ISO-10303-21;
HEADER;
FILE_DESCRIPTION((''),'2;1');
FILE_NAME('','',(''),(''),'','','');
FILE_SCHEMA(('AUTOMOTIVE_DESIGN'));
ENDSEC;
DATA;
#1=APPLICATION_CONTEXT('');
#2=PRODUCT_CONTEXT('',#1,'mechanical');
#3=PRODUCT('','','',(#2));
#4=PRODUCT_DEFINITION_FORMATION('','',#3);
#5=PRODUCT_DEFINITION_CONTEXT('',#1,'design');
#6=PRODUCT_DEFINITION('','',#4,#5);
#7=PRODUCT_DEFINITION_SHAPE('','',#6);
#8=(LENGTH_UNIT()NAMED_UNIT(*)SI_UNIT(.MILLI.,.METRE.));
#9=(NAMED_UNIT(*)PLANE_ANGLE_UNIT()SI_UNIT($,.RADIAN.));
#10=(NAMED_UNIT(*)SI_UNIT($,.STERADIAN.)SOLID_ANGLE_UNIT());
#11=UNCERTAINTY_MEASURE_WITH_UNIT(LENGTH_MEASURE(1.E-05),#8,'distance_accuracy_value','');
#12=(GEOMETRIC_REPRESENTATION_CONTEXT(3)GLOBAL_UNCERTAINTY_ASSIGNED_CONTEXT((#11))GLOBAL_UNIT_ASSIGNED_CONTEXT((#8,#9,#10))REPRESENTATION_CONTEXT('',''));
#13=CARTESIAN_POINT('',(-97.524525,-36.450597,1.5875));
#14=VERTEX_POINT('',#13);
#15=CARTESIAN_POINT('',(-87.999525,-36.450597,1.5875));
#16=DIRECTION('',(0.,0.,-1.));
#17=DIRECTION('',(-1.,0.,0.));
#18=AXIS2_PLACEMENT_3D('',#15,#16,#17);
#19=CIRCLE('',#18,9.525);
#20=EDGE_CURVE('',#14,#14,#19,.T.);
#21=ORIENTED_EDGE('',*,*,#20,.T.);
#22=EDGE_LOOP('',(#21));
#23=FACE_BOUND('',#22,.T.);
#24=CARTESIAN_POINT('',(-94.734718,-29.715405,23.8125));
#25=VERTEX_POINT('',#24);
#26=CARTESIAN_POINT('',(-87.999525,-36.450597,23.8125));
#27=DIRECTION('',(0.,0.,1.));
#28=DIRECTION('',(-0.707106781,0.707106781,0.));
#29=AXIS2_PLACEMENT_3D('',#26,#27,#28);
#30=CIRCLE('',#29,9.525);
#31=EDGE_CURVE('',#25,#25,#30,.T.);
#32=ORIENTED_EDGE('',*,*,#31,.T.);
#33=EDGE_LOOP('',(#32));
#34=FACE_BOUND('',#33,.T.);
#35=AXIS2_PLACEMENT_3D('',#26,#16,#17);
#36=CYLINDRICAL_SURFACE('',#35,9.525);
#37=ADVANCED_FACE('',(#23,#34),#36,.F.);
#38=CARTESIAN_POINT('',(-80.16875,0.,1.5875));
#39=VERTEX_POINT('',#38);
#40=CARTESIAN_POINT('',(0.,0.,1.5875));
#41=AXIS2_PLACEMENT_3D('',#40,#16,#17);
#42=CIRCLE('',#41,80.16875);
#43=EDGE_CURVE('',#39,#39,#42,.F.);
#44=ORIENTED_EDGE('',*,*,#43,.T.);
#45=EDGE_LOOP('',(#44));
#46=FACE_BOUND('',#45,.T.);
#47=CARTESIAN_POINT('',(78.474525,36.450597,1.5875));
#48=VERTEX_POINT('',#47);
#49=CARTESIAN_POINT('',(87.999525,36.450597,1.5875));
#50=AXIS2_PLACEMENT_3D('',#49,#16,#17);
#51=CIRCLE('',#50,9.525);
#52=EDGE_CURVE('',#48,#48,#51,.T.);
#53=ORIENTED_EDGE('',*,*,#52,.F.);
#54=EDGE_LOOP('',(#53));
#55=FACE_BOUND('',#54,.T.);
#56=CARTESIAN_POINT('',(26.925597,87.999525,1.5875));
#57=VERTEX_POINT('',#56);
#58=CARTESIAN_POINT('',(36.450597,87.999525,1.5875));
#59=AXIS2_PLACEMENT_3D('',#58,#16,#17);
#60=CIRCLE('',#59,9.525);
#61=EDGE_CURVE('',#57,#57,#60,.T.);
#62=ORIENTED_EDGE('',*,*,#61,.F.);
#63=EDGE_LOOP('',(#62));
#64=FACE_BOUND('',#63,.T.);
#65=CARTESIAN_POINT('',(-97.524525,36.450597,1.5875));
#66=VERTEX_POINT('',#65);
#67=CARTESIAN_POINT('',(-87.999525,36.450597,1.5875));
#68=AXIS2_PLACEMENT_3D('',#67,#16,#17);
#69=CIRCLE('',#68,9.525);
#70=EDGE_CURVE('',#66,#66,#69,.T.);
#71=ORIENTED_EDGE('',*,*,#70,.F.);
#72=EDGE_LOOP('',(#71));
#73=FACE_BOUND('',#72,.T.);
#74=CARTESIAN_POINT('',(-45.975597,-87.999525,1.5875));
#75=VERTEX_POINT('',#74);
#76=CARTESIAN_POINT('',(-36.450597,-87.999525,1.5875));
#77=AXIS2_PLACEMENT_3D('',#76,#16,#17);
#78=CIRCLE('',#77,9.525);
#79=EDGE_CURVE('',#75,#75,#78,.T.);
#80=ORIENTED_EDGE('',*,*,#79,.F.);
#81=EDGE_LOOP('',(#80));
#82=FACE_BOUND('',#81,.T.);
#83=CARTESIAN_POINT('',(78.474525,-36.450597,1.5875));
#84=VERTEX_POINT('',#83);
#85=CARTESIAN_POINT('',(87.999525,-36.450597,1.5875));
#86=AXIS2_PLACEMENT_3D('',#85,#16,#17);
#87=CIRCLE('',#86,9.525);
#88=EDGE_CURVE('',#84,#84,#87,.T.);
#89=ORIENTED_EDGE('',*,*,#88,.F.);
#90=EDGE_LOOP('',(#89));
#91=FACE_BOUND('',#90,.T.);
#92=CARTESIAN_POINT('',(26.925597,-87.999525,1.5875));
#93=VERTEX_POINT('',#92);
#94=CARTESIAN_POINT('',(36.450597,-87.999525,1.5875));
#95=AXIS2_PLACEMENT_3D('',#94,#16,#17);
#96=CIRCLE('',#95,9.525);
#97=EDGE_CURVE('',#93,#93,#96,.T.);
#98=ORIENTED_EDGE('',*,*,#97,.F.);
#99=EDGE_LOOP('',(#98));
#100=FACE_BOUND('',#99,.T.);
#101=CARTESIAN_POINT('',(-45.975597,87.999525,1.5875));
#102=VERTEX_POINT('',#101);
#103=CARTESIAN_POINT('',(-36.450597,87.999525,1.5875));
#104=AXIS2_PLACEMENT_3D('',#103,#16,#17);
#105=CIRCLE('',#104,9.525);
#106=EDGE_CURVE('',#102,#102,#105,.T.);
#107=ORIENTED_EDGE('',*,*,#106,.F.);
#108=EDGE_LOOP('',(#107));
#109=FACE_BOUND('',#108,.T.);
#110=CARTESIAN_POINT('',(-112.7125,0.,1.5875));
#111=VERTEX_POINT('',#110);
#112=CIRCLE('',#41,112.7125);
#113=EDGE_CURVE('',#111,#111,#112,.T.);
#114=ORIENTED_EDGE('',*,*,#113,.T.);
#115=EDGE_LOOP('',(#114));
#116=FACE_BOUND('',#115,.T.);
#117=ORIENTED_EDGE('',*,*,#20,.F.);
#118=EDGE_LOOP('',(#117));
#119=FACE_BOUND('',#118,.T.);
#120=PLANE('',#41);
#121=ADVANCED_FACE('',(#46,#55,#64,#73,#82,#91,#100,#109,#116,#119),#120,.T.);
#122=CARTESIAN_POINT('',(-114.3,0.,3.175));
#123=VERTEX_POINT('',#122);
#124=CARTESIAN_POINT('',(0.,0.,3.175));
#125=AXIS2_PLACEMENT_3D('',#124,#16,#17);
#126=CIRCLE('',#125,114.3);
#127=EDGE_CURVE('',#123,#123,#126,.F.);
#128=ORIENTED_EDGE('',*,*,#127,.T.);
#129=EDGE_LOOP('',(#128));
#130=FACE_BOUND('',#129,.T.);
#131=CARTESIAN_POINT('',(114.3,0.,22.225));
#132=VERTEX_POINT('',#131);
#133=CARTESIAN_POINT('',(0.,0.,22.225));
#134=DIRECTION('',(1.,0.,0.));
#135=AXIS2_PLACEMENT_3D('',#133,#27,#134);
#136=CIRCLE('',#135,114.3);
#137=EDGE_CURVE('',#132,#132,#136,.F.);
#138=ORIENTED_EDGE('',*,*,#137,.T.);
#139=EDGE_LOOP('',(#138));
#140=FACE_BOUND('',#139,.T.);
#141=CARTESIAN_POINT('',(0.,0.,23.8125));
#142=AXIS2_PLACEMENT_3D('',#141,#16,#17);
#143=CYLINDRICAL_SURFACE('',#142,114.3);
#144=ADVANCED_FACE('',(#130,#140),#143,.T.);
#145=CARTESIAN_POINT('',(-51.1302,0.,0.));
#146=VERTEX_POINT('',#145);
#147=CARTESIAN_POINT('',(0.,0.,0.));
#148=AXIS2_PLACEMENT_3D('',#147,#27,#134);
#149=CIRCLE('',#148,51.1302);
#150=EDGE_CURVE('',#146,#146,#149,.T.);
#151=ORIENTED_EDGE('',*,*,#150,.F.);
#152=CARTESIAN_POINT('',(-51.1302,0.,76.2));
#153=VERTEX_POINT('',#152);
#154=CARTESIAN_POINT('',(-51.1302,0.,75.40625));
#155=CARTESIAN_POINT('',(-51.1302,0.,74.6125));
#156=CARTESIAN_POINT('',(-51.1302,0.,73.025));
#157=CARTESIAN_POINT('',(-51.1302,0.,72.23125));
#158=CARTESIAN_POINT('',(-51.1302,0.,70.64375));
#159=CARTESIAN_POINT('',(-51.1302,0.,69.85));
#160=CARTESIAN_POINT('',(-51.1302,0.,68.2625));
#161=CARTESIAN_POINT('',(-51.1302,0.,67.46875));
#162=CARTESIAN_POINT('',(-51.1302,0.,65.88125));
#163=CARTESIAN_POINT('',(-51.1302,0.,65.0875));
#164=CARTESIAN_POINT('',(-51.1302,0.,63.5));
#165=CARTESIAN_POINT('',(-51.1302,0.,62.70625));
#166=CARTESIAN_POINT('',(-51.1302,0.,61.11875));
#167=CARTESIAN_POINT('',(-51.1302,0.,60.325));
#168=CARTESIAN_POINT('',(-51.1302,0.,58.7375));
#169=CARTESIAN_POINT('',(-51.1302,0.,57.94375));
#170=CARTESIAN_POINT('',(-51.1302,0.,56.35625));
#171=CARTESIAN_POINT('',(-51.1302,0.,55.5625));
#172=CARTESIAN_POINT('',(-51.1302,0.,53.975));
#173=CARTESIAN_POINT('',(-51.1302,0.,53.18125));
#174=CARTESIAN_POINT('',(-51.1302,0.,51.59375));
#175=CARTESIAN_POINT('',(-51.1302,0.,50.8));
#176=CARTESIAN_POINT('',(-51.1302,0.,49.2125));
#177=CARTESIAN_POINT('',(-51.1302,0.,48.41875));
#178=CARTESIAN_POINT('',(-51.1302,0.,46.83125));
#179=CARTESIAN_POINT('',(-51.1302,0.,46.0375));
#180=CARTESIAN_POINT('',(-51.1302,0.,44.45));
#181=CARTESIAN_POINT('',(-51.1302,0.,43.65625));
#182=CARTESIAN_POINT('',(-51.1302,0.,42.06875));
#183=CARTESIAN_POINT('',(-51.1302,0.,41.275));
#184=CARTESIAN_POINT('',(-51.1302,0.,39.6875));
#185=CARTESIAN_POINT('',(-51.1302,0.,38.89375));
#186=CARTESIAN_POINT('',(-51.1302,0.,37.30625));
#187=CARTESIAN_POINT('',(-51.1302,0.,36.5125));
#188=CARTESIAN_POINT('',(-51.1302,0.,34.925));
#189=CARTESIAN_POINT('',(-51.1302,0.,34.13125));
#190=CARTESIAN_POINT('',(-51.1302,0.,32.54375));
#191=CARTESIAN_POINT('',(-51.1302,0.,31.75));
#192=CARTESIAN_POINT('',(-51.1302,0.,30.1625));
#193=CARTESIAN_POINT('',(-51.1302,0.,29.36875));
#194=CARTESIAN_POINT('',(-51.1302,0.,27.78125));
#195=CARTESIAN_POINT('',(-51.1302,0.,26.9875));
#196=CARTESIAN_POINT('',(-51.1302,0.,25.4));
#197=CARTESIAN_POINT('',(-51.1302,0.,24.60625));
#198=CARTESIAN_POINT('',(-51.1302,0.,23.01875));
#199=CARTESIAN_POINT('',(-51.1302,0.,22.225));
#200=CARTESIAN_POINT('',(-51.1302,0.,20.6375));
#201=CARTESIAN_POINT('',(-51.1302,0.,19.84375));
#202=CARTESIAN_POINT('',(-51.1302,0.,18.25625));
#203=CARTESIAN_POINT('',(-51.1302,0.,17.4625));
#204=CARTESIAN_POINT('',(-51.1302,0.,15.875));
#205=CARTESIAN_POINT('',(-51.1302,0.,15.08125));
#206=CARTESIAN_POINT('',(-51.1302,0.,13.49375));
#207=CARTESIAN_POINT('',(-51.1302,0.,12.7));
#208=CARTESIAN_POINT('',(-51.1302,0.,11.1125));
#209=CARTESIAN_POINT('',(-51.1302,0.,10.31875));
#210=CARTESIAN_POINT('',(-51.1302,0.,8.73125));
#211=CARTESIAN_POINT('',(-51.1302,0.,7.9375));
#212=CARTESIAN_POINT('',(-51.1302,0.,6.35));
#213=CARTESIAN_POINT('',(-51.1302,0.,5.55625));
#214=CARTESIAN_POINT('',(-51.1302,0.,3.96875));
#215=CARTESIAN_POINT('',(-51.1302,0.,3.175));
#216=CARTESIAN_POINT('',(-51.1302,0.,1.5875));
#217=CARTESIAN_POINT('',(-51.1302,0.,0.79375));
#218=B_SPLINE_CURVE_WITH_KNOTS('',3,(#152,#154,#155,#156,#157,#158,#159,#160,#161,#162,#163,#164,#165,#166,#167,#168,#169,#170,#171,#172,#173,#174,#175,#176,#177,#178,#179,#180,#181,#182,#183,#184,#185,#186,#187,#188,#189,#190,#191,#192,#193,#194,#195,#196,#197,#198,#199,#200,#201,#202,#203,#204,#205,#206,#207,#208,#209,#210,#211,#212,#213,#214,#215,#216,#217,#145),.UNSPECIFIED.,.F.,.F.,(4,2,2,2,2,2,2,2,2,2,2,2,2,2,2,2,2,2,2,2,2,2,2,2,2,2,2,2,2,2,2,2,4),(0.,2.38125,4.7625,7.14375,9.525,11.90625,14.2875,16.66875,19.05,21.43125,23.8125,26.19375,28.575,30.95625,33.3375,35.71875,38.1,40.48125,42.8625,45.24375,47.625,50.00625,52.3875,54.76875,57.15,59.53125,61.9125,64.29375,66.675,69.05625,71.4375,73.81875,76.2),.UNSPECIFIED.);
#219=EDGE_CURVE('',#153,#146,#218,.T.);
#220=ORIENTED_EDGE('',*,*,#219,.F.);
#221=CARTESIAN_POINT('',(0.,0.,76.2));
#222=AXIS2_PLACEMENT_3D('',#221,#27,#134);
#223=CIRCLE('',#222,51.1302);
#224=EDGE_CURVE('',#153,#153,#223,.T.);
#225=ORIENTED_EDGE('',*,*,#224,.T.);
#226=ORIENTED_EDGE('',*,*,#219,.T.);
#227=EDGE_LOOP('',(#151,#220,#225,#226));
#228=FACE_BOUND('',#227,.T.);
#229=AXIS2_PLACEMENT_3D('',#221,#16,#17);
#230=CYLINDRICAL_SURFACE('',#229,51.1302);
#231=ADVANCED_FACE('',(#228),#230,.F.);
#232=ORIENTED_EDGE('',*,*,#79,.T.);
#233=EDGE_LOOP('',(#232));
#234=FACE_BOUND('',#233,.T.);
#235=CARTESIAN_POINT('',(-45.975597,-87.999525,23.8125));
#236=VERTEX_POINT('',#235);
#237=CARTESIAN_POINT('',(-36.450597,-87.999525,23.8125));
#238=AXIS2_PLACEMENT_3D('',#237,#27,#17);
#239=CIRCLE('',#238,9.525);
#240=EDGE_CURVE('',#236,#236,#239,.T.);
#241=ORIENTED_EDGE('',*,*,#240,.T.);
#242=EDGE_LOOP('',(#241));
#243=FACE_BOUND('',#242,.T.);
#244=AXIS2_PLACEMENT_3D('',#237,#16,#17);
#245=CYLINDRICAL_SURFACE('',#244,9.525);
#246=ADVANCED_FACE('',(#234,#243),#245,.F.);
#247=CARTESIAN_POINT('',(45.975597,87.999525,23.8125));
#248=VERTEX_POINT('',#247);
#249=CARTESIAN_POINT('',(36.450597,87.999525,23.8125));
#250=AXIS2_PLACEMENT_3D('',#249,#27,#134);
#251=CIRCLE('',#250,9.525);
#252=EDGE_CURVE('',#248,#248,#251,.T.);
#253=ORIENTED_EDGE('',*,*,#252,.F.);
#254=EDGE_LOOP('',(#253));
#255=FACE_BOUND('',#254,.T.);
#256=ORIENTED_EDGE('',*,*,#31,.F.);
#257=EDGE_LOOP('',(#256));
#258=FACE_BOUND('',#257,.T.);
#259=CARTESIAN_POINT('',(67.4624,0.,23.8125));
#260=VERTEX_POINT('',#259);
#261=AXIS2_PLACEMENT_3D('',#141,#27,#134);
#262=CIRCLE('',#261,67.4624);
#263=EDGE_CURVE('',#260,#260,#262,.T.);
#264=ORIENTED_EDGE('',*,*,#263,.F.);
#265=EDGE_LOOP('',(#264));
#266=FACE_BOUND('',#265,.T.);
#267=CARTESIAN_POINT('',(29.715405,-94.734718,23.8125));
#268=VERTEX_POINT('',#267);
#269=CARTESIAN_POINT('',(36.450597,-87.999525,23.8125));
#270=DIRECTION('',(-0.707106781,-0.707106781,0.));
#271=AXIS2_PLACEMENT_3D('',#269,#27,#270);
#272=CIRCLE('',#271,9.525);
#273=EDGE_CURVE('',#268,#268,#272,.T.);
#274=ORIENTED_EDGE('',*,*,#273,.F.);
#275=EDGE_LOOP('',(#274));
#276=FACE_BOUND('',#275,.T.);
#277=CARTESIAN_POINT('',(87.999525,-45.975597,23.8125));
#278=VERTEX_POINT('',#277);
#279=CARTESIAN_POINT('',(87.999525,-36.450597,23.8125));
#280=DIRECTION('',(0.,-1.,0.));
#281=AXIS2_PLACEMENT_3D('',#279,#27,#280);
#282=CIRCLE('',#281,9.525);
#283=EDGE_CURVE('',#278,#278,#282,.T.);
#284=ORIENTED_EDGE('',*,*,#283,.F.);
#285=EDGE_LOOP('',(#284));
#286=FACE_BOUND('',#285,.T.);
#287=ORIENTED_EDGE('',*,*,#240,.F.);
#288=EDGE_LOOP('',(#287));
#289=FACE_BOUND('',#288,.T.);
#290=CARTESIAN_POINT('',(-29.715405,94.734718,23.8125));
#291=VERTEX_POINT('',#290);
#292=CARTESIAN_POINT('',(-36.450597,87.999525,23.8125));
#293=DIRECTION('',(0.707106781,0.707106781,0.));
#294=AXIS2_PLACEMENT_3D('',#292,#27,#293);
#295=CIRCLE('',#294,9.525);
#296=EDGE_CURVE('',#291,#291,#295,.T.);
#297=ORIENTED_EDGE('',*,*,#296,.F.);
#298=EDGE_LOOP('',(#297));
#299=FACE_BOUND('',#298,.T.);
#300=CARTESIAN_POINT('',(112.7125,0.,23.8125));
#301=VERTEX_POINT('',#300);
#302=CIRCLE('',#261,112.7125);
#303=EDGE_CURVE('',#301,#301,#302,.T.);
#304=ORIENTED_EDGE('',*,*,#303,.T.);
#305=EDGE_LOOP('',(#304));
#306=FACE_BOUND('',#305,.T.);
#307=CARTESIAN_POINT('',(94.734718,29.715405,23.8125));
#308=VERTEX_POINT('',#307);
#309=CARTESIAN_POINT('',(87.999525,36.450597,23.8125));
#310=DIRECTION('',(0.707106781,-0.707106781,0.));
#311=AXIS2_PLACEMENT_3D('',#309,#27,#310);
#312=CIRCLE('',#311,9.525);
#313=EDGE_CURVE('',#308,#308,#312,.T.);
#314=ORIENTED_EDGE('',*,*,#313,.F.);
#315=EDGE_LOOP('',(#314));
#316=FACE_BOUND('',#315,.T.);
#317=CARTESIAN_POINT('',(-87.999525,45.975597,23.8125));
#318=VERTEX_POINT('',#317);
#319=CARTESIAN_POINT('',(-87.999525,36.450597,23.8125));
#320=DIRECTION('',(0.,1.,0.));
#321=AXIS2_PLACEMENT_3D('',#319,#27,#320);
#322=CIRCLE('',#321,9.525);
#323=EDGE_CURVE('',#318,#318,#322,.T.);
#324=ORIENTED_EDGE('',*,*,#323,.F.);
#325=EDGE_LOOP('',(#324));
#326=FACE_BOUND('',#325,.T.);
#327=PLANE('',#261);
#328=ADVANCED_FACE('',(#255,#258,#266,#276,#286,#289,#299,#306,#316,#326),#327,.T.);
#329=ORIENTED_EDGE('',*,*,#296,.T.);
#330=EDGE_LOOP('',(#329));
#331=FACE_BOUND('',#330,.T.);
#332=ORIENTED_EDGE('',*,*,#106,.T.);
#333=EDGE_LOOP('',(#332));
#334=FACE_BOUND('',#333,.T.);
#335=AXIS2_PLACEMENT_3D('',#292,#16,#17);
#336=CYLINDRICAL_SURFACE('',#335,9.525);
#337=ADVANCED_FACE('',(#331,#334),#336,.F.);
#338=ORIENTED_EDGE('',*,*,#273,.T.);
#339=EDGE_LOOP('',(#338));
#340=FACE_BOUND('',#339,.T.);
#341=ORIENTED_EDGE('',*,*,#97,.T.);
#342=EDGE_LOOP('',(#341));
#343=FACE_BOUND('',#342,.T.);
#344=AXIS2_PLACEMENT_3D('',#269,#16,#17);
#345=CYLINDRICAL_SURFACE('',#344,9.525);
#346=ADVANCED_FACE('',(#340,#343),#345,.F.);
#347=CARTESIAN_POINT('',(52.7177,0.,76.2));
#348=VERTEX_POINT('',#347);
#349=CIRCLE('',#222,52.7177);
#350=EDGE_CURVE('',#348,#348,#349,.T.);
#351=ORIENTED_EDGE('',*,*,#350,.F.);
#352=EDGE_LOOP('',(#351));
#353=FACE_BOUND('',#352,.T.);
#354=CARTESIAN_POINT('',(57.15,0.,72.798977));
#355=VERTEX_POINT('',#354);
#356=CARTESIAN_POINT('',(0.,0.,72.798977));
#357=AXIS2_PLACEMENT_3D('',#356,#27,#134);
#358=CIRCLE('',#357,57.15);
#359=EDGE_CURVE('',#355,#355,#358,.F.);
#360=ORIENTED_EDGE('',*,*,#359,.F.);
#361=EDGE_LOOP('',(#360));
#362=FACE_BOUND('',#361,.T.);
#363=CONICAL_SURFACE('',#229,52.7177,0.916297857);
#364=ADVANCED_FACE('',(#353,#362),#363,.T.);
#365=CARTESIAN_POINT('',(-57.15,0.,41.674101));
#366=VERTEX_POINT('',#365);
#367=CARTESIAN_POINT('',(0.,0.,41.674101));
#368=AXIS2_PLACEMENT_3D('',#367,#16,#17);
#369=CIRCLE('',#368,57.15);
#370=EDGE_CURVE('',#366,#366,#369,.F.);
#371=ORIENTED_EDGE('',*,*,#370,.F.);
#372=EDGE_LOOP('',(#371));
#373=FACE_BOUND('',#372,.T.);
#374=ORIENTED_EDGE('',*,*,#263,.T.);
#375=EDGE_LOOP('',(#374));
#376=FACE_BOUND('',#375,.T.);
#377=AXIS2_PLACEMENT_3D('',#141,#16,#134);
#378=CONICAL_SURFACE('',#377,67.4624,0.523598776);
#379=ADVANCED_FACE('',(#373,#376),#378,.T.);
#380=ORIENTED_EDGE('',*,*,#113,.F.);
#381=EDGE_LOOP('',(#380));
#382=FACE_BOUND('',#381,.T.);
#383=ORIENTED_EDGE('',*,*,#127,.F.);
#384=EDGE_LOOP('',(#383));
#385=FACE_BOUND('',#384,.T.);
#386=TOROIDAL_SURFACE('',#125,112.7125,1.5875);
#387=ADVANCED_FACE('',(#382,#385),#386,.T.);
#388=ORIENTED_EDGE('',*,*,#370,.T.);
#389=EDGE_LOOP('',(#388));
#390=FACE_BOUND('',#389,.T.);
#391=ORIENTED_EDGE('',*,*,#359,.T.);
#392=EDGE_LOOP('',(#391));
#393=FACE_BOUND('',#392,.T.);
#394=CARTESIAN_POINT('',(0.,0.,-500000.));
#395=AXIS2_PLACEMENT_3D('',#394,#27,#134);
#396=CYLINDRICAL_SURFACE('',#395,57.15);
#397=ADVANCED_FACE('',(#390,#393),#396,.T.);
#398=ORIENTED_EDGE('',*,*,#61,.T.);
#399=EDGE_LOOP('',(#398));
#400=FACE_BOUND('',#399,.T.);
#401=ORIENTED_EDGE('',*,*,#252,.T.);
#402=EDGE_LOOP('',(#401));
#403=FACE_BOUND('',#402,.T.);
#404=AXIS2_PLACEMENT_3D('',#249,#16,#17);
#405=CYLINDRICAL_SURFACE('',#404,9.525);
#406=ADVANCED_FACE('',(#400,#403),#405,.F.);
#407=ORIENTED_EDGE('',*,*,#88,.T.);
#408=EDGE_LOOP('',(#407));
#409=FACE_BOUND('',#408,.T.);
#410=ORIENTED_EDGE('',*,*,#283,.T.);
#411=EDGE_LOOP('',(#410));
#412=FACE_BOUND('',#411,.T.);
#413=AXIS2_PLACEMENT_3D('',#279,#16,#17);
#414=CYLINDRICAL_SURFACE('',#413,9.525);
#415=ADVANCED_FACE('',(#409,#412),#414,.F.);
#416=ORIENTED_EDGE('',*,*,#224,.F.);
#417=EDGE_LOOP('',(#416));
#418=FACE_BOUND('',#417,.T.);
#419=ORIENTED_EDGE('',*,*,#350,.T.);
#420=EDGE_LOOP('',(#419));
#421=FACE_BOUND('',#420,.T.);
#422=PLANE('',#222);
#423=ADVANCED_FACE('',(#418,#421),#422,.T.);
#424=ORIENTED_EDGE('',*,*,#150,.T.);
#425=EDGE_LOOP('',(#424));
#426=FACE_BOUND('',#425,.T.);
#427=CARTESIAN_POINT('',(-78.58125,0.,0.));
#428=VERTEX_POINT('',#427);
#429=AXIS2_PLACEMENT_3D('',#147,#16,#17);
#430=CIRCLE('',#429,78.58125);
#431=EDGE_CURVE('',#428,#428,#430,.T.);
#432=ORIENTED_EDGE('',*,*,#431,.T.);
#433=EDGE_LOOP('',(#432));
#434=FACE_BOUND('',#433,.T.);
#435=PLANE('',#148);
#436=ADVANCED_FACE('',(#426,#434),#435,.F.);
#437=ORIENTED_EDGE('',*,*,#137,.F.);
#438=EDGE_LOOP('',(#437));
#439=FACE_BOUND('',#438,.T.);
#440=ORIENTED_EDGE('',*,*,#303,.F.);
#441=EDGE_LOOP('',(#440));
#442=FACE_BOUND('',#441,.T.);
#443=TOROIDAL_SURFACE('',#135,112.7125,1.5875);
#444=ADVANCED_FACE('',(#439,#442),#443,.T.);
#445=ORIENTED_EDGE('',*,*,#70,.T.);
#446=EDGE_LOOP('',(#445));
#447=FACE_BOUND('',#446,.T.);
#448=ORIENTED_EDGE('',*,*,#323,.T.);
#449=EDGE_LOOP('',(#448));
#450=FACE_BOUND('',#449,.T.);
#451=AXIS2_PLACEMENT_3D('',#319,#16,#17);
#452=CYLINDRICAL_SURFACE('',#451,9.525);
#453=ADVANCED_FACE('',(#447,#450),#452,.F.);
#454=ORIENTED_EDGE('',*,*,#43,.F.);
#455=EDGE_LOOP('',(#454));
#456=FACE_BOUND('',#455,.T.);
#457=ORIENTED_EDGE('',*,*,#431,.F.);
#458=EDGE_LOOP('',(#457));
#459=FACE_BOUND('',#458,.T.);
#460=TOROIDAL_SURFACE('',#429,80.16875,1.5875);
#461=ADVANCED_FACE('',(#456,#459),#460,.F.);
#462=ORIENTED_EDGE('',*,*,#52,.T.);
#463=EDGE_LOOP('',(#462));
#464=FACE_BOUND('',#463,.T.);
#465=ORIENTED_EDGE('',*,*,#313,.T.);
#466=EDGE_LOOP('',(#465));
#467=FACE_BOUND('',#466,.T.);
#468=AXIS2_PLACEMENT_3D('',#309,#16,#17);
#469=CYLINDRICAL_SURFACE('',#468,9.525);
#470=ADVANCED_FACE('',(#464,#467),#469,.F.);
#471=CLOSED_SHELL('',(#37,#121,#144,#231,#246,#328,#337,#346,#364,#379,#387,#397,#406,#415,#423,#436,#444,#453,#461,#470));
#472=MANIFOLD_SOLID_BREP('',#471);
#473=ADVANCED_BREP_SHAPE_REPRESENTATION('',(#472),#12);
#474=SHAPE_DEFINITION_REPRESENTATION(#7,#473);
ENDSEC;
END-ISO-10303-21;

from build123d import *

# Parameters (mm, degrees)
SKETCH1_R                 = 114.3
BOSS_EXTRUDE1_DEPTH       = 23.8125
SKETCH2_R                 = 9.525
BOLTHOLE_DEPTH            = 164.389152505
BOLTHOLEPATTERN_COUNT     = 8
SKETCH5_OUTSIDE_W         = 295.434
SKETCH5_OUTSIDE_H         = 295.434
SKETCH5_OUTSIDE_R         = 78.58125
RAISED_FACE_DEPTH         = 1.5875
SKETCH8_R                 = 67.4624
WELD_NECK_120_DRAFT_DEPTH = 52.3875
WELD_NECK_120_DRAFT_TAPER = 30
WELD_NECK_END_REACH       = 180.705
SKETCH9_R                 = 57.15
WELD_NECK_CHAMFER1_SIZE   = 3.401023409
WELD_NECK_CHAMFER1_SIZE2  = 4.4323
SKETCH7_R                 = 51.1302
BORE_DEPTH                = 179.704840449
FILLET2_R                 = 1.5875
FILLET3_R                 = 1.5875


with BuildPart() as part:
    # Sketch1 → Boss-Extrude1 (new body)
    with BuildSketch(Plane.XY):
        Circle(SKETCH1_R)
    extrude(amount=BOSS_EXTRUDE1_DEPTH)

    # Sketch2 → BoltHole (cut, through all)
    with BuildSketch(Plane.XY):
        with Locations((36.450596933, 87.999525472)):
            Circle(SKETCH2_R)
    bolthole = extrude(amount=BOLTHOLE_DEPTH, mode=Mode.SUBTRACT)

    # BoltHolePattern: BoltHole ×8 about axis
    boltholepattern_axis = Axis((0, 0, 0), (0, 0, 1))
    for i in range(1, BOLTHOLEPATTERN_COUNT):
        add(bolthole.rotate(boltholepattern_axis, i * 360 / BOLTHOLEPATTERN_COUNT), mode=Mode.SUBTRACT)

    # Sketch5 outside → Raised Face (cut)
    with BuildSketch(Plane(origin=(0, 0, 0), x_dir=(-1, 0, 0), z_dir=(0, 0, -1))):
        Rectangle(SKETCH5_OUTSIDE_W, SKETCH5_OUTSIDE_H)
        Circle(SKETCH5_OUTSIDE_R, mode=Mode.SUBTRACT)
    extrude(amount=-RAISED_FACE_DEPTH, mode=Mode.SUBTRACT)

    # Sketch8 → Weld Neck 120 Draft (add)
    with BuildSketch(Plane.XY.offset(23.8125)):
        Circle(SKETCH8_R)
    extrude(amount=WELD_NECK_120_DRAFT_DEPTH, taper=WELD_NECK_120_DRAFT_TAPER)

    # Sketch9 → Weld Neck End (add, up to next)
    with BuildSketch(Plane.XY.offset(76.2), mode=Mode.PRIVATE) as weld_neck_end_sk1:
        Circle(SKETCH9_R)
    weld_neck_end_tool1 = extrude(weld_neck_end_sk1.sketch, amount=-WELD_NECK_END_REACH, mode=Mode.PRIVATE) - part.part
    add(weld_neck_end_tool1.solids().sort_by_distance((0, 0, 76.2))[0])

    # Weld Neck Chamfer1
    weld_neck_chamfer1_edges = [part.edges().sort_by_distance(p)[0] for p in [
        (-57.15, 0, 76.2),
    ]]
    weld_neck_chamfer1_side = [part.faces().sort_by_distance(p)[0] for p in [
        (-57.15, 0, 58.937050374),
    ]]
    chamfer(weld_neck_chamfer1_edges, length=WELD_NECK_CHAMFER1_SIZE, length2=WELD_NECK_CHAMFER1_SIZE2, reference=weld_neck_chamfer1_side[0])

    # Sketch7 → Bore (cut, through all)
    with BuildSketch(Plane.XY):
        with Locations(Location((0, 0, 0), (0, 0, 180))):
            Circle(SKETCH7_R)
    extrude(amount=BORE_DEPTH, mode=Mode.SUBTRACT)

    # Fillet2
    fillet2_edges = [part.edges().sort_by_distance(p)[0] for p in [
        (-114.3, 0, 23.8125),
        (-114.3, 0, 1.5875),
    ]]
    fillet(fillet2_edges, radius=FILLET2_R)

    # Fillet3
    fillet3_edges = [part.edges().sort_by_distance(p)[0] for p in [
        (78.58125, 0, 1.5875),
    ]]
    fillet(fillet3_edges, radius=FILLET3_R - 0.0001)  # a hair under: the kernel refuses the full size


solid = part.part
